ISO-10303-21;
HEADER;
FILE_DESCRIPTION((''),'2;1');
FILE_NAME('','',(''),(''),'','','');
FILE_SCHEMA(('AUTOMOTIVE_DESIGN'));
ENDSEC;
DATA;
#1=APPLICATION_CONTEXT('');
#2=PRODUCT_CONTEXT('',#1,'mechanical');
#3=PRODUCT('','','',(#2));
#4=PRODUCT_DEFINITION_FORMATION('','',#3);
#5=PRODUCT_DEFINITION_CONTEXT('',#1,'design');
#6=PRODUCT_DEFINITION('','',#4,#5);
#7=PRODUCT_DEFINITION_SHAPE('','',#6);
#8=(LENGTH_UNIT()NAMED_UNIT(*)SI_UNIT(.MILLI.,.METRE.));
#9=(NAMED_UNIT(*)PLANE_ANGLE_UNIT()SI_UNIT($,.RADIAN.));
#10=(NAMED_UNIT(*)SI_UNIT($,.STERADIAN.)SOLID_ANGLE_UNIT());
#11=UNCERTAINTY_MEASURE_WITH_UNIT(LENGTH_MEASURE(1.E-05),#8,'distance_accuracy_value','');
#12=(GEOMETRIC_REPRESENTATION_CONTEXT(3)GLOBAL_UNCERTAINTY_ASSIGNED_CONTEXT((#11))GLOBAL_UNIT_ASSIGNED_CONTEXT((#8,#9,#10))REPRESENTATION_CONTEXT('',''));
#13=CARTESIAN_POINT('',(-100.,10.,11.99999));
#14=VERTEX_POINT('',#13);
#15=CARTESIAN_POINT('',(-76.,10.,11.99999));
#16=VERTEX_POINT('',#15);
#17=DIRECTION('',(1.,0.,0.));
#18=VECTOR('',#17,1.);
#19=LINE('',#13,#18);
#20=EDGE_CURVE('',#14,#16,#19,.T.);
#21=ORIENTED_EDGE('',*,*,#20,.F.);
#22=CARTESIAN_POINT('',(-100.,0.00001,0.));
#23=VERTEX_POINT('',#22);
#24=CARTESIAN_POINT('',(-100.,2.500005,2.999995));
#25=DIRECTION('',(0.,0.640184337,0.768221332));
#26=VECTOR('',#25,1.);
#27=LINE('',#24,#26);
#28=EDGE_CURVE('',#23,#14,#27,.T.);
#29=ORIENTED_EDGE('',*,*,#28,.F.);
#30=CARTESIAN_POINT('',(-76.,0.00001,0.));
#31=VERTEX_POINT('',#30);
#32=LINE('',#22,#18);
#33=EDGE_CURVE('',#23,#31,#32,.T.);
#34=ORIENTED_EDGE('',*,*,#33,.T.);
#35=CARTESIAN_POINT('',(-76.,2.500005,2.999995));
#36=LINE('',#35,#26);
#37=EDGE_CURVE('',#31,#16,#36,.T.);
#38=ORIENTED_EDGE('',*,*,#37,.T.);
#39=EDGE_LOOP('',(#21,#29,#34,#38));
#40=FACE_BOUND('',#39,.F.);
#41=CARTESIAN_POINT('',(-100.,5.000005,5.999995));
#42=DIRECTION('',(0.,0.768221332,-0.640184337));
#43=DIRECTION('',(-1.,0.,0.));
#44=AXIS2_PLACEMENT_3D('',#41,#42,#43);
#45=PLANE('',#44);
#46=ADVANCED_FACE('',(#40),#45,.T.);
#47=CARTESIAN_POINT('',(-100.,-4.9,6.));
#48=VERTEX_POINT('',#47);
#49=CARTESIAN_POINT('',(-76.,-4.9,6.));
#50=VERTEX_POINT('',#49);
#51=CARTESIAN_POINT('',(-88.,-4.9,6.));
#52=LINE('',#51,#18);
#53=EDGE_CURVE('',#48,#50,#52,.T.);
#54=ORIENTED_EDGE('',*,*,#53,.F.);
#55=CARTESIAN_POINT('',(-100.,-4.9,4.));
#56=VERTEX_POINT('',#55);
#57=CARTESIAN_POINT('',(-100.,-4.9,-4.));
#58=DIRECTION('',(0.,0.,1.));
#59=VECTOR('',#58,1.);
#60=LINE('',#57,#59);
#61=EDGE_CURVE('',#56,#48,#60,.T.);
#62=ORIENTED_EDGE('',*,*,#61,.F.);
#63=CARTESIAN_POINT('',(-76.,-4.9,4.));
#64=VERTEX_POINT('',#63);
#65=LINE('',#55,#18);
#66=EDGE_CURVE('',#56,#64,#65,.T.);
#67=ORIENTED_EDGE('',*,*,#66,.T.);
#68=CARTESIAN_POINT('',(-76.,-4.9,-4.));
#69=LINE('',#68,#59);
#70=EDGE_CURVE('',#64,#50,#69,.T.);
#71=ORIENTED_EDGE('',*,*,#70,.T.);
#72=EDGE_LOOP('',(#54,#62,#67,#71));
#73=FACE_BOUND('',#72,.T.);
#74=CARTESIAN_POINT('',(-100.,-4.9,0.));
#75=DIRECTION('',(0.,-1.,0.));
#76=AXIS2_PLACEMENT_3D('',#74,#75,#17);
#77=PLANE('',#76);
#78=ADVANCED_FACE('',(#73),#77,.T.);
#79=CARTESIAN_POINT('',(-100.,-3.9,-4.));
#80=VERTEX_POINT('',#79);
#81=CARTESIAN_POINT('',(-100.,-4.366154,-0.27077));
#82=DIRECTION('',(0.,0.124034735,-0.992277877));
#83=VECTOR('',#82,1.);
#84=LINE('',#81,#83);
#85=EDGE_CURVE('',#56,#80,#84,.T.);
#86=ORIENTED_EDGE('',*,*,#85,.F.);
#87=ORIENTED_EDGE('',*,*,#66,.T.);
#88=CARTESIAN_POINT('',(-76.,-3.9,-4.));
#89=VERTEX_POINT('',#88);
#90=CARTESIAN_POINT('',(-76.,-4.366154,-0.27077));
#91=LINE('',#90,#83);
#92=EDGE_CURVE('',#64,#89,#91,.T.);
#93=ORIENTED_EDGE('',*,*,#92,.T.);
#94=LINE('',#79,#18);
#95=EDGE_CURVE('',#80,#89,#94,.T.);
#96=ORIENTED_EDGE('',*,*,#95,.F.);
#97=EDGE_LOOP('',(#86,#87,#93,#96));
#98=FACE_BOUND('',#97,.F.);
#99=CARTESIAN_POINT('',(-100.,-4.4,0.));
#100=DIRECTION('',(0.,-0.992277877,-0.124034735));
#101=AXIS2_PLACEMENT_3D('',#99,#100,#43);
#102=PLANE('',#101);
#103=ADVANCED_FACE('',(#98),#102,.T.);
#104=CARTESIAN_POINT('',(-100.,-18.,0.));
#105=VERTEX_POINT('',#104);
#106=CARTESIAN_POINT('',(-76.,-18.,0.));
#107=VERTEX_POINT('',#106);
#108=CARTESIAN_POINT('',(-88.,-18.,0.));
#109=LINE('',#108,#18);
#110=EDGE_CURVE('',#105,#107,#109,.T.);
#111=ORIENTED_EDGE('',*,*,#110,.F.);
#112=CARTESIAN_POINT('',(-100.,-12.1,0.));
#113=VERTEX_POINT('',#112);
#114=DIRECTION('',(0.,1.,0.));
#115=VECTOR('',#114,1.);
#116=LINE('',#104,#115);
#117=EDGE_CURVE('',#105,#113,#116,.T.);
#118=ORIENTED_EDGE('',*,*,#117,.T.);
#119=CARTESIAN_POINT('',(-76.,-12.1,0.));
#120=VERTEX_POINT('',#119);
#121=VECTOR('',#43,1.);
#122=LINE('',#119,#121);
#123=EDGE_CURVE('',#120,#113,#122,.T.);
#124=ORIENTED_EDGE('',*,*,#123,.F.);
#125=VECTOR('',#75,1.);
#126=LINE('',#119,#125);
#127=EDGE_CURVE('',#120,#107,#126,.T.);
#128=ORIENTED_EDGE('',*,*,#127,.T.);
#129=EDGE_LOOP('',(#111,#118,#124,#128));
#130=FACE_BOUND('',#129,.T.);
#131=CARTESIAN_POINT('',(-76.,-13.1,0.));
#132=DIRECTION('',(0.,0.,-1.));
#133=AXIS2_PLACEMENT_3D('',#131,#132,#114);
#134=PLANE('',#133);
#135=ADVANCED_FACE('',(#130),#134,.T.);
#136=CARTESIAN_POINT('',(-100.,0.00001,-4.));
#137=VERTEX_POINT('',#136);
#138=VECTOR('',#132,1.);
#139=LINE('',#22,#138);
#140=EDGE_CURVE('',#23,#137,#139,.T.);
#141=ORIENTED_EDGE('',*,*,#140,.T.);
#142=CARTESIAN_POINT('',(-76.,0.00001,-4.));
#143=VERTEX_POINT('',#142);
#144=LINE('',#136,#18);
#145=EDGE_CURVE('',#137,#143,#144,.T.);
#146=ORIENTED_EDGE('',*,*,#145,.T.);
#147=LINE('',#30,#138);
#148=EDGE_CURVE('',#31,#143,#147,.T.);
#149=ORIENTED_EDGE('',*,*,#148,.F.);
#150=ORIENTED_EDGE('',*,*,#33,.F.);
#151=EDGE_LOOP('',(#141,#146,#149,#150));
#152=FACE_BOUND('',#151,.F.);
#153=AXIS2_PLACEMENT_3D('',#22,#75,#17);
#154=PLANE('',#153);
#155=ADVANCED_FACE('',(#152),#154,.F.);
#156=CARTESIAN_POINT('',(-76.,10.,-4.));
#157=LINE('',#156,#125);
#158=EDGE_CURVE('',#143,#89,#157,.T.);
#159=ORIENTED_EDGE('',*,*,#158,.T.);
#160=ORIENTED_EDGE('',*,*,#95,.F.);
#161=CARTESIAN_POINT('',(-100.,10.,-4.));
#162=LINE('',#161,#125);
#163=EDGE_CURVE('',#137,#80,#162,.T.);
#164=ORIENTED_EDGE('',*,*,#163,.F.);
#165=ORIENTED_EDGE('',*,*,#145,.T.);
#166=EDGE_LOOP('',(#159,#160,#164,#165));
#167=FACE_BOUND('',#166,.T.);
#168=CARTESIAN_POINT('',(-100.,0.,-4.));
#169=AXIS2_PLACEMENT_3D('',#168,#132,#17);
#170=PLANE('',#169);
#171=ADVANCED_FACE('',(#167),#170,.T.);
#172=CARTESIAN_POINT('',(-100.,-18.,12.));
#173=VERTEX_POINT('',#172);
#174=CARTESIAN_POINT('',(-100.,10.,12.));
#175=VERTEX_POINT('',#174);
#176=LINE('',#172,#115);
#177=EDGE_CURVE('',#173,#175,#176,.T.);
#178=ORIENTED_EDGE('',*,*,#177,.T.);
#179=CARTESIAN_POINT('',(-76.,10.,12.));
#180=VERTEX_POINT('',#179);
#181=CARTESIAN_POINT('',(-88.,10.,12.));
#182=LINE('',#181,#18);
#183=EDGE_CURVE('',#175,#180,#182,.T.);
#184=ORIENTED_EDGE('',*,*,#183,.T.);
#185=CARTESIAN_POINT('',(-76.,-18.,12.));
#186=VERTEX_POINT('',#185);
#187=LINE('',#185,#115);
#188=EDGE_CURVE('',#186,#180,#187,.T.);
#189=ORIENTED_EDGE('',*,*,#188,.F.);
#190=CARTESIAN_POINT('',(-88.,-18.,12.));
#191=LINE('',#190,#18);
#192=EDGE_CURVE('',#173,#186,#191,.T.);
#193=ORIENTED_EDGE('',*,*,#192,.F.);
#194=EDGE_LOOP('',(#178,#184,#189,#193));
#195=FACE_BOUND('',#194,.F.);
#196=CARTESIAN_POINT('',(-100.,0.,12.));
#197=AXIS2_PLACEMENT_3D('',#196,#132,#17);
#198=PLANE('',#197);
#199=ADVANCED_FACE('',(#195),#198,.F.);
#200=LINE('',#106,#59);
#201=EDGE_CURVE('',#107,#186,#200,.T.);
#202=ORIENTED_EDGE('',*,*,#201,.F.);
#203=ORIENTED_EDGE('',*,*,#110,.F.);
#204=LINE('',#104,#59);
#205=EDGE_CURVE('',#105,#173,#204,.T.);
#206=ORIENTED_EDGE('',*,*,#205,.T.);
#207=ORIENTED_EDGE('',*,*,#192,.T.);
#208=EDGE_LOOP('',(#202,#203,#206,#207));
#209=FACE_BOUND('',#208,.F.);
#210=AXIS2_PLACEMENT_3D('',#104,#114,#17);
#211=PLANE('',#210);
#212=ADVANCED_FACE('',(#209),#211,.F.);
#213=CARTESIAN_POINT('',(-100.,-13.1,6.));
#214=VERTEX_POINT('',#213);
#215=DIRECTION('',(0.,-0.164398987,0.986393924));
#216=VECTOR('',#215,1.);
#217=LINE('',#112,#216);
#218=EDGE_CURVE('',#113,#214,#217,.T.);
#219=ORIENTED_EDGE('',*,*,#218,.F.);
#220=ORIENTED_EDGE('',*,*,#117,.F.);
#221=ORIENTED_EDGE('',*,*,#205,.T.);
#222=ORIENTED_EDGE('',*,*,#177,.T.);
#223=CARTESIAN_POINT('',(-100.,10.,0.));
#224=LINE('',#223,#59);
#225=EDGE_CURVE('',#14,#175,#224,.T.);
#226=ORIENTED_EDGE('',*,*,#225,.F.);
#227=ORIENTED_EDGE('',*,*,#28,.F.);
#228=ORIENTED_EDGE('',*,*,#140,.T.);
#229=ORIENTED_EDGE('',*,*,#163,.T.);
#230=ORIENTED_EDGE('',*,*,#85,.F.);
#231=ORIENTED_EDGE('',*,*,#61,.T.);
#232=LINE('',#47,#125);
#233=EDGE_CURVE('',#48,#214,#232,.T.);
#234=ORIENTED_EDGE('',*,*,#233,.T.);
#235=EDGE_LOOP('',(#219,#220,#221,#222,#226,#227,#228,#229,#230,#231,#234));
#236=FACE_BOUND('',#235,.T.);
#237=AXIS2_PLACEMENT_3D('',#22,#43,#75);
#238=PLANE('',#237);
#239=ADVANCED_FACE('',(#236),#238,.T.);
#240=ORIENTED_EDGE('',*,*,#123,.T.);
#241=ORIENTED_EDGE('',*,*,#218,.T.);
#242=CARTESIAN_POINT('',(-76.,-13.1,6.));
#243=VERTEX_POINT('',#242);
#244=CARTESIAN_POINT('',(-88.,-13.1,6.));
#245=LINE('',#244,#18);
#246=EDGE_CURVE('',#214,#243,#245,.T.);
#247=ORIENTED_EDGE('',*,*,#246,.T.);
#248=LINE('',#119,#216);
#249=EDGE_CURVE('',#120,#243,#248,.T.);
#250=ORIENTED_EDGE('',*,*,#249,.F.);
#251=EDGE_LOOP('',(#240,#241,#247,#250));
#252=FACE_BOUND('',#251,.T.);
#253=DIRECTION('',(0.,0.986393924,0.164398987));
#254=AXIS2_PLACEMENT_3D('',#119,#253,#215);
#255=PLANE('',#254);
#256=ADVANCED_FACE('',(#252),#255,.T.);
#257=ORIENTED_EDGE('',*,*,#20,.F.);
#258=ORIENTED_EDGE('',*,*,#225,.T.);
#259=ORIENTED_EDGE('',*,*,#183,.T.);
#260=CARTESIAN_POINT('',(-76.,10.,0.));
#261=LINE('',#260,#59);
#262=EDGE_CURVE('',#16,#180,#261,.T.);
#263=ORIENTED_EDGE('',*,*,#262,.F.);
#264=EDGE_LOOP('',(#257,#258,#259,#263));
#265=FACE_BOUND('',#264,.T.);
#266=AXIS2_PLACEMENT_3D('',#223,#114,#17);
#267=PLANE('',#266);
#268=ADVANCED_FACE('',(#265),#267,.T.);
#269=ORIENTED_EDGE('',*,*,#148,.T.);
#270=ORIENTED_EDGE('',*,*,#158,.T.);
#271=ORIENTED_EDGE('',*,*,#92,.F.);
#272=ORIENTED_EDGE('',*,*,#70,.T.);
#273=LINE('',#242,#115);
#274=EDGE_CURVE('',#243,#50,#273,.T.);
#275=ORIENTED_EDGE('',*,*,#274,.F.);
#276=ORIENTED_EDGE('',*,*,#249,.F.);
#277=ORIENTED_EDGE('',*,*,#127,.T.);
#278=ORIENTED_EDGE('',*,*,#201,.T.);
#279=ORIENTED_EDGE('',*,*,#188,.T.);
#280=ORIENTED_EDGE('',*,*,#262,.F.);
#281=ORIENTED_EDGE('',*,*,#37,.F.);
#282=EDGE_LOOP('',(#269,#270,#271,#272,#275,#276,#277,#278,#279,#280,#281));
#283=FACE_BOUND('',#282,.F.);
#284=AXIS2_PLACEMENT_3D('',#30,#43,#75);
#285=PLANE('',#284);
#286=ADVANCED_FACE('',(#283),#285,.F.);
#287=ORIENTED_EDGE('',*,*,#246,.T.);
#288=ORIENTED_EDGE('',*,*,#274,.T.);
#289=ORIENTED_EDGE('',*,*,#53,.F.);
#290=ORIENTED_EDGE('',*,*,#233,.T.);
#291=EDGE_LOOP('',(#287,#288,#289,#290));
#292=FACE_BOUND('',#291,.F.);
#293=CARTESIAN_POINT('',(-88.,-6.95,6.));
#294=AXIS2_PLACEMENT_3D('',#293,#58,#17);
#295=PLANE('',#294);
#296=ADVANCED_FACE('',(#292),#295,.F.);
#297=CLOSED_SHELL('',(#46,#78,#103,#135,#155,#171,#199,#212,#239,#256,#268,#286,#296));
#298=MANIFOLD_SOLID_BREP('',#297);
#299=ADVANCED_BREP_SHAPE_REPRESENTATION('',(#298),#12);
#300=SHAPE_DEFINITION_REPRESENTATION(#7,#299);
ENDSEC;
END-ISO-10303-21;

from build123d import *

# Parameters (mm, degrees)
F0_W     = 24
F0_H     = 4.9
F0_H_2   = 4.1
F1_DEPTH = 12
F2_DEPTH = 6
F3_DEPTH = 10
F4_SIZE2 = 11.99999
F4_SIZE  = 9.99999
F6_DEPTH = 24
F7_DEPTH = 4
F8_SIZE2 = 1
F8_SIZE  = 8


# Not quite as in the source:
# - a fillet or chamfer is up to 0.001 mm smaller than in the source, because OpenCascade refuses the exact size


with BuildPart() as f1:
    # F0 (on Top) → F1 (new body)
    with BuildSketch(Plane.XY):
        with Locations((-88, -2.45)):
            Rectangle(F0_W, F0_H)
        with Locations((-88, -6.95)):
            Rectangle(F0_W, F0_H_2)
        with Locations((-88, -11.05)):
            Rectangle(F0_W, F0_H_2)
        with Locations((-88, -15.55)):
            Rectangle(F0_W, F0_H)
    extrude(amount=F1_DEPTH)

    # F0 (on Top) → F2 (cut)
    with BuildSketch(Plane.XY):
        with Locations((-88, -6.95)):
            Rectangle(F0_W, F0_H_2)
        with Locations((-88, -11.05)):
            Rectangle(F0_W, F0_H_2)
    extrude(amount=F2_DEPTH, mode=Mode.SUBTRACT)

    # F3 (add): a face of the model
    f3_faces = [f1.faces().sort_by_distance(p)[0] for p in [
        (-88, 0, 6),
    ]]
    extrude(f3_faces, amount=F3_DEPTH)

    # F4 (size 10 and 12 in the source; OpenCascade refuses exactly that, so slightly less here)
    f4_edges = [f1.edges().sort_by_distance(p)[0] for p in [
        (-88, 10, 0),
    ]]
    f4_side = f1.faces().sort_by_distance((-88, 2.55, 0))[0]
    chamfer(f4_edges, length=F4_SIZE, length2=F4_SIZE2, reference=f4_side)

    # F5 (on face) → F6 (join, through all)
    with BuildSketch(Plane.YZ.offset(-76)):
        Polygon((-13.1, 0), (-12.1, 0), (-13.1, 6), align=None)
    extrude(amount=-F6_DEPTH)

    # F7 (add): a face of the model
    f7_faces = [f1.faces().sort_by_distance(p)[0] for p in [
        (-88, -2.449995, 0),
    ]]
    extrude(f7_faces, amount=F7_DEPTH)

    # F8
    f8_edges = [f1.edges().sort_by_distance(p)[0] for p in [
        (-88, -4.9, -4),
    ]]
    f8_side = f1.faces().sort_by_distance((-88, -4.9, 1))[0]
    chamfer(f8_edges, length=F8_SIZE, length2=F8_SIZE2, reference=f8_side)


solid = f1.part
